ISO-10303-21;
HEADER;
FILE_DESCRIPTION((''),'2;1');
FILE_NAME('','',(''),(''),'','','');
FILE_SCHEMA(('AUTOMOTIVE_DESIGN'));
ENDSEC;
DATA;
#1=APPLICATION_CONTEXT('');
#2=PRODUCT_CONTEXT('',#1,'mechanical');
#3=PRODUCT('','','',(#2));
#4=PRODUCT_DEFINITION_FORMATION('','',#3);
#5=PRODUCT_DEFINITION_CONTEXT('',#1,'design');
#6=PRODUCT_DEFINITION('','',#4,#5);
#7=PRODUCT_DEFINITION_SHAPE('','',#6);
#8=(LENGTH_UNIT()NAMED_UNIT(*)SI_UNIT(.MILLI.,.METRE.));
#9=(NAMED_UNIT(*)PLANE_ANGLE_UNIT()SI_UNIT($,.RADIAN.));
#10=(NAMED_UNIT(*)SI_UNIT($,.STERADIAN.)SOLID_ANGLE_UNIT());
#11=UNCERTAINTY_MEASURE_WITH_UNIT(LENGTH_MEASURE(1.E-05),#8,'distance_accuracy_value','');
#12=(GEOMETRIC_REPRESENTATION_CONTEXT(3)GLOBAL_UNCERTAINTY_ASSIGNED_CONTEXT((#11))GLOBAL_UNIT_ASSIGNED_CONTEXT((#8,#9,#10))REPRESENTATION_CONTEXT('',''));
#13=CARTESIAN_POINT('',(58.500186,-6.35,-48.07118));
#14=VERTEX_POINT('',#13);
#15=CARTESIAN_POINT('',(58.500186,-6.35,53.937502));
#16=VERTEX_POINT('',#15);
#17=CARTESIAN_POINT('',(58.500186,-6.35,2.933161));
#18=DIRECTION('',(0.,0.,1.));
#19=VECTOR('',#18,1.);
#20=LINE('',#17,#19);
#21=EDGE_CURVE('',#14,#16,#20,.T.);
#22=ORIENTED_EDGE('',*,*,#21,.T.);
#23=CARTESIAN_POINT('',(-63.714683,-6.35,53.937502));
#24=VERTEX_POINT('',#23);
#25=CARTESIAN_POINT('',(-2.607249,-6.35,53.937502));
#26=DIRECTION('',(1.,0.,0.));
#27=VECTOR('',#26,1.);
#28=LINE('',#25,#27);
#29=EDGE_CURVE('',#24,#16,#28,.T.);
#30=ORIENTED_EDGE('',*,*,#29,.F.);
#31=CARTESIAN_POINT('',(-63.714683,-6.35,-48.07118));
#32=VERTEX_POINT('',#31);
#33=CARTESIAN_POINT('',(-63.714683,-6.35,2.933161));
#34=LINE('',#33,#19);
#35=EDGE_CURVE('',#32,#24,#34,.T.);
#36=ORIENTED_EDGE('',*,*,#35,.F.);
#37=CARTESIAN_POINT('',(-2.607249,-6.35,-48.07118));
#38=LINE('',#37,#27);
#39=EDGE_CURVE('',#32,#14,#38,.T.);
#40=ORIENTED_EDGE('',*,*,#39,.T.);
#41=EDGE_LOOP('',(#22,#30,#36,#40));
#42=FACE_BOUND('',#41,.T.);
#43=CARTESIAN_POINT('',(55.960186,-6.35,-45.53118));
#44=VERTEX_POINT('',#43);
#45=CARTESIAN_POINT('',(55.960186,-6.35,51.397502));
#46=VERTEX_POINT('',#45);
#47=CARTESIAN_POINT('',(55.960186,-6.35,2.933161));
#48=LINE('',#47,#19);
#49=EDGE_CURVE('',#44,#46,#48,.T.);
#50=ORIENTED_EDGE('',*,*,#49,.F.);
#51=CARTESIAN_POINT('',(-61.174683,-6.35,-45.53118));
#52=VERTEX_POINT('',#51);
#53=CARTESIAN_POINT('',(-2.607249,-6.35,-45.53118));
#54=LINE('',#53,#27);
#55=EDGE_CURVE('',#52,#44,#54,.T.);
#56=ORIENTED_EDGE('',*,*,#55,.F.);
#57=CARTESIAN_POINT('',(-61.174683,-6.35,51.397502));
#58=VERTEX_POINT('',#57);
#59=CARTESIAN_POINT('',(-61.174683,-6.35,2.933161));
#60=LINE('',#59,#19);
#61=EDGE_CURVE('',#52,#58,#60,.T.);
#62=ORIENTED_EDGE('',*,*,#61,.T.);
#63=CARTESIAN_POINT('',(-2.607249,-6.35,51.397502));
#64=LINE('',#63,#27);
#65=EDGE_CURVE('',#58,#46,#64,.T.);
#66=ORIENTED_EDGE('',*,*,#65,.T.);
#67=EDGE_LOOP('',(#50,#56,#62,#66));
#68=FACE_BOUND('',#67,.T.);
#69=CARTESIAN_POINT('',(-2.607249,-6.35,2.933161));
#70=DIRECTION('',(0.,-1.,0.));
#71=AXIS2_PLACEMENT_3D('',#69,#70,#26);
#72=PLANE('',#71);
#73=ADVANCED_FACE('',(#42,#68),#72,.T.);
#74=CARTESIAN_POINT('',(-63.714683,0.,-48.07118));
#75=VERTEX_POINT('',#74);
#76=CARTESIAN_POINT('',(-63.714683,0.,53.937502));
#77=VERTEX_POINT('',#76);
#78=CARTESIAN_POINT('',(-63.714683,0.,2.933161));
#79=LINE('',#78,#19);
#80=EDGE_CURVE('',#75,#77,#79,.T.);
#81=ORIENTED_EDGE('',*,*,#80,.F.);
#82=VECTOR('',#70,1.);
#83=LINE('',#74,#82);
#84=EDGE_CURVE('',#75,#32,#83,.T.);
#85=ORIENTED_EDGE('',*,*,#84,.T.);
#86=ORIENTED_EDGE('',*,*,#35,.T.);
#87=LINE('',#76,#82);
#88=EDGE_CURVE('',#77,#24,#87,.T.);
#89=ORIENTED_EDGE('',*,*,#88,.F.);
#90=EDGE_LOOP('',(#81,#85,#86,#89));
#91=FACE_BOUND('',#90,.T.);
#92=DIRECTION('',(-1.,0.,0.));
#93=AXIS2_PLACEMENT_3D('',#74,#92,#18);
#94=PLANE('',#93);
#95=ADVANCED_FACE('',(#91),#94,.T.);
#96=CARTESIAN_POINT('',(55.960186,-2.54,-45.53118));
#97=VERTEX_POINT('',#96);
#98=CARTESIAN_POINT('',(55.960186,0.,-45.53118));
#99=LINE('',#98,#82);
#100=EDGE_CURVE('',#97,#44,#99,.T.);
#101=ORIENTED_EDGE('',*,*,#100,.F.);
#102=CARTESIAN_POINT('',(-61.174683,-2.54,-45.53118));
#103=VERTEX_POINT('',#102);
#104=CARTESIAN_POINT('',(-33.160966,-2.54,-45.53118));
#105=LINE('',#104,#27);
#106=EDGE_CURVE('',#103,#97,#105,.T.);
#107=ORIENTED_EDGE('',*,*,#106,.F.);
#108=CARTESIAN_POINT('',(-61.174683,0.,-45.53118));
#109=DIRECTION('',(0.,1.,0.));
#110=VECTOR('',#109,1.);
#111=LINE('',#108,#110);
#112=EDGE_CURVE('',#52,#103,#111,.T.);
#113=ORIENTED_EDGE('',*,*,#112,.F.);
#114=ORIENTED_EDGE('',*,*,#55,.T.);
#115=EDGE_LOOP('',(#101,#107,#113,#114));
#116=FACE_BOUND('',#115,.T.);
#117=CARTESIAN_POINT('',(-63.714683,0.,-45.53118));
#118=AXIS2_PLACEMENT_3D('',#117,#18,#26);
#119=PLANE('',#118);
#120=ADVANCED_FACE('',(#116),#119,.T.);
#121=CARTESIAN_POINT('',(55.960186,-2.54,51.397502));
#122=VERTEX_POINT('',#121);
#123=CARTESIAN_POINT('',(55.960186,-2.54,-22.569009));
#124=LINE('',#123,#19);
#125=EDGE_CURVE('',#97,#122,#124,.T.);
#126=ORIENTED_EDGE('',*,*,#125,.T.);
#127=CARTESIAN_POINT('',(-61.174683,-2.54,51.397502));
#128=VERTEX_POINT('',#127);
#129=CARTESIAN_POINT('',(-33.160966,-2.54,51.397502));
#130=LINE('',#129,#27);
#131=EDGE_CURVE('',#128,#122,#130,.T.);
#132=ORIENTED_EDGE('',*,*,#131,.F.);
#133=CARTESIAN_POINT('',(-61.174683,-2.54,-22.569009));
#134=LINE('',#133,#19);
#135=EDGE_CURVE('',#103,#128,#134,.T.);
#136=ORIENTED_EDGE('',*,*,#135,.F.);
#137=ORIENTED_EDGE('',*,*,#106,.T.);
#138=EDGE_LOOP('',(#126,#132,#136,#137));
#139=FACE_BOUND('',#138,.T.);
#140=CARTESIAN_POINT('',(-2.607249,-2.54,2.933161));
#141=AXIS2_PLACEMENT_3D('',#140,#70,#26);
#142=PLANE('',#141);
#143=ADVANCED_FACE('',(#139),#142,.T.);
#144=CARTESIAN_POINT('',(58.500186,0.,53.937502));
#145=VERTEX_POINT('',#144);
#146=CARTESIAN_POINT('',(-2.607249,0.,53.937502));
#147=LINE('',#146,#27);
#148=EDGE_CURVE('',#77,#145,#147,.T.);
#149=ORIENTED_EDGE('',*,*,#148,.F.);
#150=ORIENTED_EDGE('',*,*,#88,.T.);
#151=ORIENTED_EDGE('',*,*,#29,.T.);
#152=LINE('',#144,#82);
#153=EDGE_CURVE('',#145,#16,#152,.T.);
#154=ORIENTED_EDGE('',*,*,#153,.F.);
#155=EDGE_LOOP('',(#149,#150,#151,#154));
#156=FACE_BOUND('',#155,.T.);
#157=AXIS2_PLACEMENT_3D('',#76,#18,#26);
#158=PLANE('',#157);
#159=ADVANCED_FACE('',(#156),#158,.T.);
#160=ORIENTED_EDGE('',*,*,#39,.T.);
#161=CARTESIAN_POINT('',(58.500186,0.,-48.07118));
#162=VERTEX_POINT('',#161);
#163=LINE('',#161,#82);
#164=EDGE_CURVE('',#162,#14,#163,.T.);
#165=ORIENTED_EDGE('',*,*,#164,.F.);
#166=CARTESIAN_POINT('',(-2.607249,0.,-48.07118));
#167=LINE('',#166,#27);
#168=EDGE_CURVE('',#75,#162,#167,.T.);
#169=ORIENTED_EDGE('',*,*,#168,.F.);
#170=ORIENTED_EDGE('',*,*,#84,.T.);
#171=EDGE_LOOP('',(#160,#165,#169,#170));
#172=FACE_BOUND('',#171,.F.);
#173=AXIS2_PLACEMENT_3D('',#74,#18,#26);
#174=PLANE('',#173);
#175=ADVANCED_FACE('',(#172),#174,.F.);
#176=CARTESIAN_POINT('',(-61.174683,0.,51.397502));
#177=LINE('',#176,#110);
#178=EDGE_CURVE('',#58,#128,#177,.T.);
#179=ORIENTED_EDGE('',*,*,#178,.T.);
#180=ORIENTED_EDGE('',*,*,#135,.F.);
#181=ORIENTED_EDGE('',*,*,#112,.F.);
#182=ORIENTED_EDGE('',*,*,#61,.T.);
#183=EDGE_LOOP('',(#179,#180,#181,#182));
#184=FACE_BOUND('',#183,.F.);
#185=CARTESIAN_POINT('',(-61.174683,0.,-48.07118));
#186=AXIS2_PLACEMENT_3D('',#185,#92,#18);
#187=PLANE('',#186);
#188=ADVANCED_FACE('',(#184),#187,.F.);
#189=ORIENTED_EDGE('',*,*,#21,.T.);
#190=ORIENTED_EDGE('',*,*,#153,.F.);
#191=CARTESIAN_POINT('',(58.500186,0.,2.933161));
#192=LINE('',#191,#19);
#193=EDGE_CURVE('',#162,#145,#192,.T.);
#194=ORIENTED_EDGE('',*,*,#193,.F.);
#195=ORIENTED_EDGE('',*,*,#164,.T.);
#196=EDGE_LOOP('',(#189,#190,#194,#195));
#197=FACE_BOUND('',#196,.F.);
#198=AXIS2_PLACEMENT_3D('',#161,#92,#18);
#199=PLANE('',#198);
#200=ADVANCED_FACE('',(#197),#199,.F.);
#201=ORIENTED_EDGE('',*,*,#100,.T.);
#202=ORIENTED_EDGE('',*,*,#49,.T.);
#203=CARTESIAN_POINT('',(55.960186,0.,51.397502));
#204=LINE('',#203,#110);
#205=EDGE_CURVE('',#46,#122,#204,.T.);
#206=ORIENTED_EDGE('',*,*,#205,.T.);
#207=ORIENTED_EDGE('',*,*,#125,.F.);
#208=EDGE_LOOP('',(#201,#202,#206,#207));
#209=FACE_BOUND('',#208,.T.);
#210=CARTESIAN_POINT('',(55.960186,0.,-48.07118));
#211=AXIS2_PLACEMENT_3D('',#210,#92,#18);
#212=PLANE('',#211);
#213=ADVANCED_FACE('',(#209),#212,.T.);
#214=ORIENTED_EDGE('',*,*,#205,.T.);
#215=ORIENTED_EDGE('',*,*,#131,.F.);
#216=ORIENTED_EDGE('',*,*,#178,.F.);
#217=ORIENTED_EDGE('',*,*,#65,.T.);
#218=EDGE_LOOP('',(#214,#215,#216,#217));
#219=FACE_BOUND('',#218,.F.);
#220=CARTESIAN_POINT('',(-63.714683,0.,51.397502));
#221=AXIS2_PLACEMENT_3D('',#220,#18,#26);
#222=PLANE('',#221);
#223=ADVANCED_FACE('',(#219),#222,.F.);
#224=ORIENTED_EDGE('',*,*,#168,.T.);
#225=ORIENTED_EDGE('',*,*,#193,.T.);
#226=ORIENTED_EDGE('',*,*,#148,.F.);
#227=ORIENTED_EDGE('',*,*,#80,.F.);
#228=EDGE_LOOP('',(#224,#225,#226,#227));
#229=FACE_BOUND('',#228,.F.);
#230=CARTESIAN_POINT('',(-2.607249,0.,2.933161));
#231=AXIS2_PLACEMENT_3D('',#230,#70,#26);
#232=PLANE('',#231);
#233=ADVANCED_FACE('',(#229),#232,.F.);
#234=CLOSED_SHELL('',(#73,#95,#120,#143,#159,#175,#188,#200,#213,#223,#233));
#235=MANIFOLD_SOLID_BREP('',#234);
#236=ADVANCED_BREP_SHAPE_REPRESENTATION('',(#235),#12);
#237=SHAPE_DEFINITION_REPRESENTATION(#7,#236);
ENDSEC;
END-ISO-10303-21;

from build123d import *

# Parameters (mm, degrees)
F2_W     = 122.2148686647
F2_H     = 102.0086817443
F3_DEPTH = 6.35
F4_T     = -2.54


# Not quite as in the source:
# - the program builds the solid bodies; features that only make, move or delete a surface that nothing else refers to are left out


with BuildPart() as f3:
    # F2 (on Front) → F3 (new body)
    with BuildSketch(Plane.XZ):
        with Locations((-2.6072487235, 2.9331613332)):
            Rectangle(F2_W, F2_H)
    extrude(amount=F3_DEPTH)

    # F4
    f4_openings = [f3.faces().sort_by_distance(p)[0] for p in [
        (-2.607249, -6.35, 2.933161),
    ]]
    offset(amount=F4_T, openings=f4_openings)


solid = f3.part
